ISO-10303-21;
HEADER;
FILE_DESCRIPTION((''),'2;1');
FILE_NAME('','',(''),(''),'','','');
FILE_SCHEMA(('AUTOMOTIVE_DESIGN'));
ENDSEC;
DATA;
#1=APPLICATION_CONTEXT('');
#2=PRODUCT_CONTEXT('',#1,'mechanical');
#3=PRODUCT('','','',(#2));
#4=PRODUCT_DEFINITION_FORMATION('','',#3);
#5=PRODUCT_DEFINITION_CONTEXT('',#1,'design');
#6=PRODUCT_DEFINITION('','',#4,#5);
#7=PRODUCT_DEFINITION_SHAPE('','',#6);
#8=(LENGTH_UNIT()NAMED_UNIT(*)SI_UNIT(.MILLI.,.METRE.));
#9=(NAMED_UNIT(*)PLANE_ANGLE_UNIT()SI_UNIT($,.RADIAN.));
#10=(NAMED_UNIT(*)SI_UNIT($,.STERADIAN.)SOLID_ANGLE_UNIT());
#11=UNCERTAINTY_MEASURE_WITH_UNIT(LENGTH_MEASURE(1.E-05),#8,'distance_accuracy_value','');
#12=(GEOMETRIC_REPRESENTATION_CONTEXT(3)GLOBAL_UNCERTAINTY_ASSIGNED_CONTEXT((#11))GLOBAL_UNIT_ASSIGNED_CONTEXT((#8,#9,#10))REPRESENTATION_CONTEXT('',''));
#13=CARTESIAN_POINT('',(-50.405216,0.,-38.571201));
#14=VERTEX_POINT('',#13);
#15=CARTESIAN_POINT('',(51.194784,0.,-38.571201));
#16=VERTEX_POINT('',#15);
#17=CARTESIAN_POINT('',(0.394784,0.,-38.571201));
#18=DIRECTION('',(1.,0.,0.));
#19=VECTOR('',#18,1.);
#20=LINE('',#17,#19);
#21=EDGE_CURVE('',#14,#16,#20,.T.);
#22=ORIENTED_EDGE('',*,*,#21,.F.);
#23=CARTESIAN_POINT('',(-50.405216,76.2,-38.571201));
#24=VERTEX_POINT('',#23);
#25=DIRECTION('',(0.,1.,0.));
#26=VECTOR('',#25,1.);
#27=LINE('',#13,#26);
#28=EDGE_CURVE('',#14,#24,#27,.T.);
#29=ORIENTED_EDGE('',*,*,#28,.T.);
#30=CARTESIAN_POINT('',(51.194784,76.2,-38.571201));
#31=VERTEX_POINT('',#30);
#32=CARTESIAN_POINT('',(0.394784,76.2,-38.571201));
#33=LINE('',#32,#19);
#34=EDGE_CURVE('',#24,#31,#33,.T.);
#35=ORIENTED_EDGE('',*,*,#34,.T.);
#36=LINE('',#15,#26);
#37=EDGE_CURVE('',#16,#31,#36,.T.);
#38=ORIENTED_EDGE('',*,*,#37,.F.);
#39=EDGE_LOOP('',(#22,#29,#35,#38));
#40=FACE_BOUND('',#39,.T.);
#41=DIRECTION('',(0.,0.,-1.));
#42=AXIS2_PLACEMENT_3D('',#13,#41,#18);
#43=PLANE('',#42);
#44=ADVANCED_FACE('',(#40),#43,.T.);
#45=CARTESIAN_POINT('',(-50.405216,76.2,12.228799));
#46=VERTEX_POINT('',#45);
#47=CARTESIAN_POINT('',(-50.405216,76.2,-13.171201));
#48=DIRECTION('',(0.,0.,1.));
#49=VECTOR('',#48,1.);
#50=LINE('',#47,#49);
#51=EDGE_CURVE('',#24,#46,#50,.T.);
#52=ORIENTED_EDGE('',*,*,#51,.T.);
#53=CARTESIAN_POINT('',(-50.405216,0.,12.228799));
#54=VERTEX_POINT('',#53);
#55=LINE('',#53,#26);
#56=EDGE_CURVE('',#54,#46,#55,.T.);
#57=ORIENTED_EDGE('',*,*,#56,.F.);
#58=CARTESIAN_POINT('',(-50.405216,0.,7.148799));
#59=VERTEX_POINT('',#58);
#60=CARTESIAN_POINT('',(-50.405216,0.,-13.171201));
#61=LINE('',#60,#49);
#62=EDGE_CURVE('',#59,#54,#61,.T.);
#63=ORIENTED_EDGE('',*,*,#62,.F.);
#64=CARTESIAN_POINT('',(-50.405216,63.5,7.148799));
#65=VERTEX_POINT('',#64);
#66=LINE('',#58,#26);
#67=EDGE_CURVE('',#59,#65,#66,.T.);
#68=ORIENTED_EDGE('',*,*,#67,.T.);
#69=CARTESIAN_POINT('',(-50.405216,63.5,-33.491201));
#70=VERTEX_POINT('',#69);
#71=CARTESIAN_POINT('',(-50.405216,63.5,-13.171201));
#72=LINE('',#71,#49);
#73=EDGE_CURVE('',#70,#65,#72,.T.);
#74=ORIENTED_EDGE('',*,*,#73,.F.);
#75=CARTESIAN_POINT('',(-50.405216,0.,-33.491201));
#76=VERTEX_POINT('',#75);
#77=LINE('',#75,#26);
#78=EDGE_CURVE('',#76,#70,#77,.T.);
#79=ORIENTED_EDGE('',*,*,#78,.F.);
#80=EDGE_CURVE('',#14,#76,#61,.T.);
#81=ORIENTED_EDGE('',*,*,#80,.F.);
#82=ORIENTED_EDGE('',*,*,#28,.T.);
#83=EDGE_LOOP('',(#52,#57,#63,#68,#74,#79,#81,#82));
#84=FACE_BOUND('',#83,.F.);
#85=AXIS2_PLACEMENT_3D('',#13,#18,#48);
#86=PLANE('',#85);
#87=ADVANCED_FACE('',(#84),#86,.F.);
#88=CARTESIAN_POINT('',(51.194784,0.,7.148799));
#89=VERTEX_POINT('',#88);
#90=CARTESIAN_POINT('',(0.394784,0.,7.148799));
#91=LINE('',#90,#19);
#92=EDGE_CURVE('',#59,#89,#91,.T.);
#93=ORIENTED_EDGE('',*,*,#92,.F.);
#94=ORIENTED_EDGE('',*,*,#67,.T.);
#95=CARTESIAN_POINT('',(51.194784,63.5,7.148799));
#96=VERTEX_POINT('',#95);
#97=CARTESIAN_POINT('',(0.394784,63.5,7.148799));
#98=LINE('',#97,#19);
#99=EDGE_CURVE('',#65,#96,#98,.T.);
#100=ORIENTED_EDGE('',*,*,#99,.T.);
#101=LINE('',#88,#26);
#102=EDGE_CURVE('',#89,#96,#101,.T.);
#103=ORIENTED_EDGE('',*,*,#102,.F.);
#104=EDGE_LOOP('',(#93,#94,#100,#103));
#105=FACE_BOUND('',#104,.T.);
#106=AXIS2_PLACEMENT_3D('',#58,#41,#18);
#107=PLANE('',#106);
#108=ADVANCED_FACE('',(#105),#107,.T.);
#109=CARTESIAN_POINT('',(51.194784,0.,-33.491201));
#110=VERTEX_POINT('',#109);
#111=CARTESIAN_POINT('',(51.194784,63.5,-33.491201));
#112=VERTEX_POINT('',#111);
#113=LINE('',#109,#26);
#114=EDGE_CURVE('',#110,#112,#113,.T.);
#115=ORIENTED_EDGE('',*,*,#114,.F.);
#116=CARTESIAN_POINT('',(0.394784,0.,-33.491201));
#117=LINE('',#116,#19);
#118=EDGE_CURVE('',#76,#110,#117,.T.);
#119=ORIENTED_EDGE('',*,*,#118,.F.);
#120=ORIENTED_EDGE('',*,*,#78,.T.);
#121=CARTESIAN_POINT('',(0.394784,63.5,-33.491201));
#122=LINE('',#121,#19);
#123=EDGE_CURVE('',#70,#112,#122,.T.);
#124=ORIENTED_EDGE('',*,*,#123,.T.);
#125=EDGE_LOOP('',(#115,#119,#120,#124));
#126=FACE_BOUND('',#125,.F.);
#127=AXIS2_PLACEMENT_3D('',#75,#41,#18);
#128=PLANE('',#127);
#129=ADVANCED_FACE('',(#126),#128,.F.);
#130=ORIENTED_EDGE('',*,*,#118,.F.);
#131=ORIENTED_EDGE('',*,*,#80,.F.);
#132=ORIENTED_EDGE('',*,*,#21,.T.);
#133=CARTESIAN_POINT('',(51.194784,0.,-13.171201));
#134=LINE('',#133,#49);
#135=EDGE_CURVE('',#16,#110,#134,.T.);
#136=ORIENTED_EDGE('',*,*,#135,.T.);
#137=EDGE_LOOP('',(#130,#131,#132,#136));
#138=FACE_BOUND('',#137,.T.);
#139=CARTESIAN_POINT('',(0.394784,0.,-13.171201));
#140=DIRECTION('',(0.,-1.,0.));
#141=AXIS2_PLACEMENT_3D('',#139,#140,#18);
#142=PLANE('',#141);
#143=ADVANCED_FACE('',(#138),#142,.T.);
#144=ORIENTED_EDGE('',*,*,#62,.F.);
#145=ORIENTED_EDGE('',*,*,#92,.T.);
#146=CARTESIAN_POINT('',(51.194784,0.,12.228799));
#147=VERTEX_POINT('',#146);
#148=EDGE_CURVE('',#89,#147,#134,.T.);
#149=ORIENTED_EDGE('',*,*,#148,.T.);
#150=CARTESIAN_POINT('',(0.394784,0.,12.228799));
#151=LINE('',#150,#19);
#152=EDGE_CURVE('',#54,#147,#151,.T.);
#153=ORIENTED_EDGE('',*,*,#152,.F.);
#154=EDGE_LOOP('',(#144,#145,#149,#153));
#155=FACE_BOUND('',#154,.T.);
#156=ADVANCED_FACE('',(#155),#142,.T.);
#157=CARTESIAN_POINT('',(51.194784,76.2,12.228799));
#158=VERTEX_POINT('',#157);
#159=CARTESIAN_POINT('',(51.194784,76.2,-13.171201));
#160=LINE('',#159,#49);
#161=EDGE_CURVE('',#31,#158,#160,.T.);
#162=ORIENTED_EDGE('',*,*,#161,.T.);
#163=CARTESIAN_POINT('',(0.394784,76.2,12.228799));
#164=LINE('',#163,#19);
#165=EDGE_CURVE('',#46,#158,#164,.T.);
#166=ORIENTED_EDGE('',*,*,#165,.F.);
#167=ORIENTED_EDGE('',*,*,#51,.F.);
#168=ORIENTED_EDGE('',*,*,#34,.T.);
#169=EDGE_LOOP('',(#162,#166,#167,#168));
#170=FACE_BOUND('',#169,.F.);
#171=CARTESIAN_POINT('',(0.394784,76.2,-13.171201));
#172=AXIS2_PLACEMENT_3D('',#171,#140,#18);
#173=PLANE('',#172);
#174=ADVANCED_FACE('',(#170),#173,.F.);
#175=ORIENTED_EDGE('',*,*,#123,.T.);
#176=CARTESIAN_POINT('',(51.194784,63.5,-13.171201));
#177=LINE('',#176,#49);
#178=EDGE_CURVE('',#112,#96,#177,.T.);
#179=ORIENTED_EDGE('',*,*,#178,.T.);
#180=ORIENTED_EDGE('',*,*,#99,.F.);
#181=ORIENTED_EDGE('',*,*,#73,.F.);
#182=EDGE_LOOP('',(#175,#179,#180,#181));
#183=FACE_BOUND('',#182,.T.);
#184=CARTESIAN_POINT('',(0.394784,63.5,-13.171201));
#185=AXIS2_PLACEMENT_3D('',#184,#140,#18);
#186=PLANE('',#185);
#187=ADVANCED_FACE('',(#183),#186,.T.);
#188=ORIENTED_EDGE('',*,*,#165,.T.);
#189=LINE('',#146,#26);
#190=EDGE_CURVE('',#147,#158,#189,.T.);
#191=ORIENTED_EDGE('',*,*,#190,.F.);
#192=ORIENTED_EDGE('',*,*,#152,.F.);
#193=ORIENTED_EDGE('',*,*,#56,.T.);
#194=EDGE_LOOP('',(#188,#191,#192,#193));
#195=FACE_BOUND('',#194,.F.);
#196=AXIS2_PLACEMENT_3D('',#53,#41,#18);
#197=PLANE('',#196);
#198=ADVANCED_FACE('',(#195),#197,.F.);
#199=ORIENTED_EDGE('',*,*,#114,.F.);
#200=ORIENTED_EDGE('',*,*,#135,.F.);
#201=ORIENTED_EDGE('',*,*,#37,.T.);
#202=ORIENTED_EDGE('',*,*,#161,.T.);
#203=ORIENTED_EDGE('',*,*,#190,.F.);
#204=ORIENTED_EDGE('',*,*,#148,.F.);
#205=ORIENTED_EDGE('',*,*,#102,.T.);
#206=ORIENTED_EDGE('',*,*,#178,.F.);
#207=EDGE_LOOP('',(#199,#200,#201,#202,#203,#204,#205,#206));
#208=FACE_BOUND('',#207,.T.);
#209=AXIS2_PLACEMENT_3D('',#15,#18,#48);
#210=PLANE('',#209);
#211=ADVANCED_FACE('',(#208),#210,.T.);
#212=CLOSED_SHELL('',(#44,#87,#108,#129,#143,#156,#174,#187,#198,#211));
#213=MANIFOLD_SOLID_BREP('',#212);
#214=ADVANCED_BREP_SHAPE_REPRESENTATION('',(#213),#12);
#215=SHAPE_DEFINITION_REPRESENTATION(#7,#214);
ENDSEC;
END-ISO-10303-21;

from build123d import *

# Parameters (mm, degrees)
F0_W     = 101.6
F0_H     = 50.8
F1_DEPTH = 76.2
F3_W     = 101.6
F3_H     = 40.64
F4_DEPTH = 63.5


# Not quite as in the source:
# - the program builds the solid bodies; features that only make, move or delete a surface that nothing else refers to are left out


with BuildPart() as f1:
    # F0 (on Front) → F1 (new body)
    with BuildSketch(Plane.XZ):
        with Locations((0.3947839141, -13.1712006897)):
            Rectangle(F0_W, F0_H)
    extrude(amount=-F1_DEPTH)

    # F3 (on face) → F4 (cut)
    with BuildSketch(Plane.XZ):
        with Locations((0.3947839141, -13.1712006897)):
            Rectangle(F3_W, F3_H)
    extrude(amount=-F4_DEPTH, mode=Mode.SUBTRACT)


solid = f1.part
